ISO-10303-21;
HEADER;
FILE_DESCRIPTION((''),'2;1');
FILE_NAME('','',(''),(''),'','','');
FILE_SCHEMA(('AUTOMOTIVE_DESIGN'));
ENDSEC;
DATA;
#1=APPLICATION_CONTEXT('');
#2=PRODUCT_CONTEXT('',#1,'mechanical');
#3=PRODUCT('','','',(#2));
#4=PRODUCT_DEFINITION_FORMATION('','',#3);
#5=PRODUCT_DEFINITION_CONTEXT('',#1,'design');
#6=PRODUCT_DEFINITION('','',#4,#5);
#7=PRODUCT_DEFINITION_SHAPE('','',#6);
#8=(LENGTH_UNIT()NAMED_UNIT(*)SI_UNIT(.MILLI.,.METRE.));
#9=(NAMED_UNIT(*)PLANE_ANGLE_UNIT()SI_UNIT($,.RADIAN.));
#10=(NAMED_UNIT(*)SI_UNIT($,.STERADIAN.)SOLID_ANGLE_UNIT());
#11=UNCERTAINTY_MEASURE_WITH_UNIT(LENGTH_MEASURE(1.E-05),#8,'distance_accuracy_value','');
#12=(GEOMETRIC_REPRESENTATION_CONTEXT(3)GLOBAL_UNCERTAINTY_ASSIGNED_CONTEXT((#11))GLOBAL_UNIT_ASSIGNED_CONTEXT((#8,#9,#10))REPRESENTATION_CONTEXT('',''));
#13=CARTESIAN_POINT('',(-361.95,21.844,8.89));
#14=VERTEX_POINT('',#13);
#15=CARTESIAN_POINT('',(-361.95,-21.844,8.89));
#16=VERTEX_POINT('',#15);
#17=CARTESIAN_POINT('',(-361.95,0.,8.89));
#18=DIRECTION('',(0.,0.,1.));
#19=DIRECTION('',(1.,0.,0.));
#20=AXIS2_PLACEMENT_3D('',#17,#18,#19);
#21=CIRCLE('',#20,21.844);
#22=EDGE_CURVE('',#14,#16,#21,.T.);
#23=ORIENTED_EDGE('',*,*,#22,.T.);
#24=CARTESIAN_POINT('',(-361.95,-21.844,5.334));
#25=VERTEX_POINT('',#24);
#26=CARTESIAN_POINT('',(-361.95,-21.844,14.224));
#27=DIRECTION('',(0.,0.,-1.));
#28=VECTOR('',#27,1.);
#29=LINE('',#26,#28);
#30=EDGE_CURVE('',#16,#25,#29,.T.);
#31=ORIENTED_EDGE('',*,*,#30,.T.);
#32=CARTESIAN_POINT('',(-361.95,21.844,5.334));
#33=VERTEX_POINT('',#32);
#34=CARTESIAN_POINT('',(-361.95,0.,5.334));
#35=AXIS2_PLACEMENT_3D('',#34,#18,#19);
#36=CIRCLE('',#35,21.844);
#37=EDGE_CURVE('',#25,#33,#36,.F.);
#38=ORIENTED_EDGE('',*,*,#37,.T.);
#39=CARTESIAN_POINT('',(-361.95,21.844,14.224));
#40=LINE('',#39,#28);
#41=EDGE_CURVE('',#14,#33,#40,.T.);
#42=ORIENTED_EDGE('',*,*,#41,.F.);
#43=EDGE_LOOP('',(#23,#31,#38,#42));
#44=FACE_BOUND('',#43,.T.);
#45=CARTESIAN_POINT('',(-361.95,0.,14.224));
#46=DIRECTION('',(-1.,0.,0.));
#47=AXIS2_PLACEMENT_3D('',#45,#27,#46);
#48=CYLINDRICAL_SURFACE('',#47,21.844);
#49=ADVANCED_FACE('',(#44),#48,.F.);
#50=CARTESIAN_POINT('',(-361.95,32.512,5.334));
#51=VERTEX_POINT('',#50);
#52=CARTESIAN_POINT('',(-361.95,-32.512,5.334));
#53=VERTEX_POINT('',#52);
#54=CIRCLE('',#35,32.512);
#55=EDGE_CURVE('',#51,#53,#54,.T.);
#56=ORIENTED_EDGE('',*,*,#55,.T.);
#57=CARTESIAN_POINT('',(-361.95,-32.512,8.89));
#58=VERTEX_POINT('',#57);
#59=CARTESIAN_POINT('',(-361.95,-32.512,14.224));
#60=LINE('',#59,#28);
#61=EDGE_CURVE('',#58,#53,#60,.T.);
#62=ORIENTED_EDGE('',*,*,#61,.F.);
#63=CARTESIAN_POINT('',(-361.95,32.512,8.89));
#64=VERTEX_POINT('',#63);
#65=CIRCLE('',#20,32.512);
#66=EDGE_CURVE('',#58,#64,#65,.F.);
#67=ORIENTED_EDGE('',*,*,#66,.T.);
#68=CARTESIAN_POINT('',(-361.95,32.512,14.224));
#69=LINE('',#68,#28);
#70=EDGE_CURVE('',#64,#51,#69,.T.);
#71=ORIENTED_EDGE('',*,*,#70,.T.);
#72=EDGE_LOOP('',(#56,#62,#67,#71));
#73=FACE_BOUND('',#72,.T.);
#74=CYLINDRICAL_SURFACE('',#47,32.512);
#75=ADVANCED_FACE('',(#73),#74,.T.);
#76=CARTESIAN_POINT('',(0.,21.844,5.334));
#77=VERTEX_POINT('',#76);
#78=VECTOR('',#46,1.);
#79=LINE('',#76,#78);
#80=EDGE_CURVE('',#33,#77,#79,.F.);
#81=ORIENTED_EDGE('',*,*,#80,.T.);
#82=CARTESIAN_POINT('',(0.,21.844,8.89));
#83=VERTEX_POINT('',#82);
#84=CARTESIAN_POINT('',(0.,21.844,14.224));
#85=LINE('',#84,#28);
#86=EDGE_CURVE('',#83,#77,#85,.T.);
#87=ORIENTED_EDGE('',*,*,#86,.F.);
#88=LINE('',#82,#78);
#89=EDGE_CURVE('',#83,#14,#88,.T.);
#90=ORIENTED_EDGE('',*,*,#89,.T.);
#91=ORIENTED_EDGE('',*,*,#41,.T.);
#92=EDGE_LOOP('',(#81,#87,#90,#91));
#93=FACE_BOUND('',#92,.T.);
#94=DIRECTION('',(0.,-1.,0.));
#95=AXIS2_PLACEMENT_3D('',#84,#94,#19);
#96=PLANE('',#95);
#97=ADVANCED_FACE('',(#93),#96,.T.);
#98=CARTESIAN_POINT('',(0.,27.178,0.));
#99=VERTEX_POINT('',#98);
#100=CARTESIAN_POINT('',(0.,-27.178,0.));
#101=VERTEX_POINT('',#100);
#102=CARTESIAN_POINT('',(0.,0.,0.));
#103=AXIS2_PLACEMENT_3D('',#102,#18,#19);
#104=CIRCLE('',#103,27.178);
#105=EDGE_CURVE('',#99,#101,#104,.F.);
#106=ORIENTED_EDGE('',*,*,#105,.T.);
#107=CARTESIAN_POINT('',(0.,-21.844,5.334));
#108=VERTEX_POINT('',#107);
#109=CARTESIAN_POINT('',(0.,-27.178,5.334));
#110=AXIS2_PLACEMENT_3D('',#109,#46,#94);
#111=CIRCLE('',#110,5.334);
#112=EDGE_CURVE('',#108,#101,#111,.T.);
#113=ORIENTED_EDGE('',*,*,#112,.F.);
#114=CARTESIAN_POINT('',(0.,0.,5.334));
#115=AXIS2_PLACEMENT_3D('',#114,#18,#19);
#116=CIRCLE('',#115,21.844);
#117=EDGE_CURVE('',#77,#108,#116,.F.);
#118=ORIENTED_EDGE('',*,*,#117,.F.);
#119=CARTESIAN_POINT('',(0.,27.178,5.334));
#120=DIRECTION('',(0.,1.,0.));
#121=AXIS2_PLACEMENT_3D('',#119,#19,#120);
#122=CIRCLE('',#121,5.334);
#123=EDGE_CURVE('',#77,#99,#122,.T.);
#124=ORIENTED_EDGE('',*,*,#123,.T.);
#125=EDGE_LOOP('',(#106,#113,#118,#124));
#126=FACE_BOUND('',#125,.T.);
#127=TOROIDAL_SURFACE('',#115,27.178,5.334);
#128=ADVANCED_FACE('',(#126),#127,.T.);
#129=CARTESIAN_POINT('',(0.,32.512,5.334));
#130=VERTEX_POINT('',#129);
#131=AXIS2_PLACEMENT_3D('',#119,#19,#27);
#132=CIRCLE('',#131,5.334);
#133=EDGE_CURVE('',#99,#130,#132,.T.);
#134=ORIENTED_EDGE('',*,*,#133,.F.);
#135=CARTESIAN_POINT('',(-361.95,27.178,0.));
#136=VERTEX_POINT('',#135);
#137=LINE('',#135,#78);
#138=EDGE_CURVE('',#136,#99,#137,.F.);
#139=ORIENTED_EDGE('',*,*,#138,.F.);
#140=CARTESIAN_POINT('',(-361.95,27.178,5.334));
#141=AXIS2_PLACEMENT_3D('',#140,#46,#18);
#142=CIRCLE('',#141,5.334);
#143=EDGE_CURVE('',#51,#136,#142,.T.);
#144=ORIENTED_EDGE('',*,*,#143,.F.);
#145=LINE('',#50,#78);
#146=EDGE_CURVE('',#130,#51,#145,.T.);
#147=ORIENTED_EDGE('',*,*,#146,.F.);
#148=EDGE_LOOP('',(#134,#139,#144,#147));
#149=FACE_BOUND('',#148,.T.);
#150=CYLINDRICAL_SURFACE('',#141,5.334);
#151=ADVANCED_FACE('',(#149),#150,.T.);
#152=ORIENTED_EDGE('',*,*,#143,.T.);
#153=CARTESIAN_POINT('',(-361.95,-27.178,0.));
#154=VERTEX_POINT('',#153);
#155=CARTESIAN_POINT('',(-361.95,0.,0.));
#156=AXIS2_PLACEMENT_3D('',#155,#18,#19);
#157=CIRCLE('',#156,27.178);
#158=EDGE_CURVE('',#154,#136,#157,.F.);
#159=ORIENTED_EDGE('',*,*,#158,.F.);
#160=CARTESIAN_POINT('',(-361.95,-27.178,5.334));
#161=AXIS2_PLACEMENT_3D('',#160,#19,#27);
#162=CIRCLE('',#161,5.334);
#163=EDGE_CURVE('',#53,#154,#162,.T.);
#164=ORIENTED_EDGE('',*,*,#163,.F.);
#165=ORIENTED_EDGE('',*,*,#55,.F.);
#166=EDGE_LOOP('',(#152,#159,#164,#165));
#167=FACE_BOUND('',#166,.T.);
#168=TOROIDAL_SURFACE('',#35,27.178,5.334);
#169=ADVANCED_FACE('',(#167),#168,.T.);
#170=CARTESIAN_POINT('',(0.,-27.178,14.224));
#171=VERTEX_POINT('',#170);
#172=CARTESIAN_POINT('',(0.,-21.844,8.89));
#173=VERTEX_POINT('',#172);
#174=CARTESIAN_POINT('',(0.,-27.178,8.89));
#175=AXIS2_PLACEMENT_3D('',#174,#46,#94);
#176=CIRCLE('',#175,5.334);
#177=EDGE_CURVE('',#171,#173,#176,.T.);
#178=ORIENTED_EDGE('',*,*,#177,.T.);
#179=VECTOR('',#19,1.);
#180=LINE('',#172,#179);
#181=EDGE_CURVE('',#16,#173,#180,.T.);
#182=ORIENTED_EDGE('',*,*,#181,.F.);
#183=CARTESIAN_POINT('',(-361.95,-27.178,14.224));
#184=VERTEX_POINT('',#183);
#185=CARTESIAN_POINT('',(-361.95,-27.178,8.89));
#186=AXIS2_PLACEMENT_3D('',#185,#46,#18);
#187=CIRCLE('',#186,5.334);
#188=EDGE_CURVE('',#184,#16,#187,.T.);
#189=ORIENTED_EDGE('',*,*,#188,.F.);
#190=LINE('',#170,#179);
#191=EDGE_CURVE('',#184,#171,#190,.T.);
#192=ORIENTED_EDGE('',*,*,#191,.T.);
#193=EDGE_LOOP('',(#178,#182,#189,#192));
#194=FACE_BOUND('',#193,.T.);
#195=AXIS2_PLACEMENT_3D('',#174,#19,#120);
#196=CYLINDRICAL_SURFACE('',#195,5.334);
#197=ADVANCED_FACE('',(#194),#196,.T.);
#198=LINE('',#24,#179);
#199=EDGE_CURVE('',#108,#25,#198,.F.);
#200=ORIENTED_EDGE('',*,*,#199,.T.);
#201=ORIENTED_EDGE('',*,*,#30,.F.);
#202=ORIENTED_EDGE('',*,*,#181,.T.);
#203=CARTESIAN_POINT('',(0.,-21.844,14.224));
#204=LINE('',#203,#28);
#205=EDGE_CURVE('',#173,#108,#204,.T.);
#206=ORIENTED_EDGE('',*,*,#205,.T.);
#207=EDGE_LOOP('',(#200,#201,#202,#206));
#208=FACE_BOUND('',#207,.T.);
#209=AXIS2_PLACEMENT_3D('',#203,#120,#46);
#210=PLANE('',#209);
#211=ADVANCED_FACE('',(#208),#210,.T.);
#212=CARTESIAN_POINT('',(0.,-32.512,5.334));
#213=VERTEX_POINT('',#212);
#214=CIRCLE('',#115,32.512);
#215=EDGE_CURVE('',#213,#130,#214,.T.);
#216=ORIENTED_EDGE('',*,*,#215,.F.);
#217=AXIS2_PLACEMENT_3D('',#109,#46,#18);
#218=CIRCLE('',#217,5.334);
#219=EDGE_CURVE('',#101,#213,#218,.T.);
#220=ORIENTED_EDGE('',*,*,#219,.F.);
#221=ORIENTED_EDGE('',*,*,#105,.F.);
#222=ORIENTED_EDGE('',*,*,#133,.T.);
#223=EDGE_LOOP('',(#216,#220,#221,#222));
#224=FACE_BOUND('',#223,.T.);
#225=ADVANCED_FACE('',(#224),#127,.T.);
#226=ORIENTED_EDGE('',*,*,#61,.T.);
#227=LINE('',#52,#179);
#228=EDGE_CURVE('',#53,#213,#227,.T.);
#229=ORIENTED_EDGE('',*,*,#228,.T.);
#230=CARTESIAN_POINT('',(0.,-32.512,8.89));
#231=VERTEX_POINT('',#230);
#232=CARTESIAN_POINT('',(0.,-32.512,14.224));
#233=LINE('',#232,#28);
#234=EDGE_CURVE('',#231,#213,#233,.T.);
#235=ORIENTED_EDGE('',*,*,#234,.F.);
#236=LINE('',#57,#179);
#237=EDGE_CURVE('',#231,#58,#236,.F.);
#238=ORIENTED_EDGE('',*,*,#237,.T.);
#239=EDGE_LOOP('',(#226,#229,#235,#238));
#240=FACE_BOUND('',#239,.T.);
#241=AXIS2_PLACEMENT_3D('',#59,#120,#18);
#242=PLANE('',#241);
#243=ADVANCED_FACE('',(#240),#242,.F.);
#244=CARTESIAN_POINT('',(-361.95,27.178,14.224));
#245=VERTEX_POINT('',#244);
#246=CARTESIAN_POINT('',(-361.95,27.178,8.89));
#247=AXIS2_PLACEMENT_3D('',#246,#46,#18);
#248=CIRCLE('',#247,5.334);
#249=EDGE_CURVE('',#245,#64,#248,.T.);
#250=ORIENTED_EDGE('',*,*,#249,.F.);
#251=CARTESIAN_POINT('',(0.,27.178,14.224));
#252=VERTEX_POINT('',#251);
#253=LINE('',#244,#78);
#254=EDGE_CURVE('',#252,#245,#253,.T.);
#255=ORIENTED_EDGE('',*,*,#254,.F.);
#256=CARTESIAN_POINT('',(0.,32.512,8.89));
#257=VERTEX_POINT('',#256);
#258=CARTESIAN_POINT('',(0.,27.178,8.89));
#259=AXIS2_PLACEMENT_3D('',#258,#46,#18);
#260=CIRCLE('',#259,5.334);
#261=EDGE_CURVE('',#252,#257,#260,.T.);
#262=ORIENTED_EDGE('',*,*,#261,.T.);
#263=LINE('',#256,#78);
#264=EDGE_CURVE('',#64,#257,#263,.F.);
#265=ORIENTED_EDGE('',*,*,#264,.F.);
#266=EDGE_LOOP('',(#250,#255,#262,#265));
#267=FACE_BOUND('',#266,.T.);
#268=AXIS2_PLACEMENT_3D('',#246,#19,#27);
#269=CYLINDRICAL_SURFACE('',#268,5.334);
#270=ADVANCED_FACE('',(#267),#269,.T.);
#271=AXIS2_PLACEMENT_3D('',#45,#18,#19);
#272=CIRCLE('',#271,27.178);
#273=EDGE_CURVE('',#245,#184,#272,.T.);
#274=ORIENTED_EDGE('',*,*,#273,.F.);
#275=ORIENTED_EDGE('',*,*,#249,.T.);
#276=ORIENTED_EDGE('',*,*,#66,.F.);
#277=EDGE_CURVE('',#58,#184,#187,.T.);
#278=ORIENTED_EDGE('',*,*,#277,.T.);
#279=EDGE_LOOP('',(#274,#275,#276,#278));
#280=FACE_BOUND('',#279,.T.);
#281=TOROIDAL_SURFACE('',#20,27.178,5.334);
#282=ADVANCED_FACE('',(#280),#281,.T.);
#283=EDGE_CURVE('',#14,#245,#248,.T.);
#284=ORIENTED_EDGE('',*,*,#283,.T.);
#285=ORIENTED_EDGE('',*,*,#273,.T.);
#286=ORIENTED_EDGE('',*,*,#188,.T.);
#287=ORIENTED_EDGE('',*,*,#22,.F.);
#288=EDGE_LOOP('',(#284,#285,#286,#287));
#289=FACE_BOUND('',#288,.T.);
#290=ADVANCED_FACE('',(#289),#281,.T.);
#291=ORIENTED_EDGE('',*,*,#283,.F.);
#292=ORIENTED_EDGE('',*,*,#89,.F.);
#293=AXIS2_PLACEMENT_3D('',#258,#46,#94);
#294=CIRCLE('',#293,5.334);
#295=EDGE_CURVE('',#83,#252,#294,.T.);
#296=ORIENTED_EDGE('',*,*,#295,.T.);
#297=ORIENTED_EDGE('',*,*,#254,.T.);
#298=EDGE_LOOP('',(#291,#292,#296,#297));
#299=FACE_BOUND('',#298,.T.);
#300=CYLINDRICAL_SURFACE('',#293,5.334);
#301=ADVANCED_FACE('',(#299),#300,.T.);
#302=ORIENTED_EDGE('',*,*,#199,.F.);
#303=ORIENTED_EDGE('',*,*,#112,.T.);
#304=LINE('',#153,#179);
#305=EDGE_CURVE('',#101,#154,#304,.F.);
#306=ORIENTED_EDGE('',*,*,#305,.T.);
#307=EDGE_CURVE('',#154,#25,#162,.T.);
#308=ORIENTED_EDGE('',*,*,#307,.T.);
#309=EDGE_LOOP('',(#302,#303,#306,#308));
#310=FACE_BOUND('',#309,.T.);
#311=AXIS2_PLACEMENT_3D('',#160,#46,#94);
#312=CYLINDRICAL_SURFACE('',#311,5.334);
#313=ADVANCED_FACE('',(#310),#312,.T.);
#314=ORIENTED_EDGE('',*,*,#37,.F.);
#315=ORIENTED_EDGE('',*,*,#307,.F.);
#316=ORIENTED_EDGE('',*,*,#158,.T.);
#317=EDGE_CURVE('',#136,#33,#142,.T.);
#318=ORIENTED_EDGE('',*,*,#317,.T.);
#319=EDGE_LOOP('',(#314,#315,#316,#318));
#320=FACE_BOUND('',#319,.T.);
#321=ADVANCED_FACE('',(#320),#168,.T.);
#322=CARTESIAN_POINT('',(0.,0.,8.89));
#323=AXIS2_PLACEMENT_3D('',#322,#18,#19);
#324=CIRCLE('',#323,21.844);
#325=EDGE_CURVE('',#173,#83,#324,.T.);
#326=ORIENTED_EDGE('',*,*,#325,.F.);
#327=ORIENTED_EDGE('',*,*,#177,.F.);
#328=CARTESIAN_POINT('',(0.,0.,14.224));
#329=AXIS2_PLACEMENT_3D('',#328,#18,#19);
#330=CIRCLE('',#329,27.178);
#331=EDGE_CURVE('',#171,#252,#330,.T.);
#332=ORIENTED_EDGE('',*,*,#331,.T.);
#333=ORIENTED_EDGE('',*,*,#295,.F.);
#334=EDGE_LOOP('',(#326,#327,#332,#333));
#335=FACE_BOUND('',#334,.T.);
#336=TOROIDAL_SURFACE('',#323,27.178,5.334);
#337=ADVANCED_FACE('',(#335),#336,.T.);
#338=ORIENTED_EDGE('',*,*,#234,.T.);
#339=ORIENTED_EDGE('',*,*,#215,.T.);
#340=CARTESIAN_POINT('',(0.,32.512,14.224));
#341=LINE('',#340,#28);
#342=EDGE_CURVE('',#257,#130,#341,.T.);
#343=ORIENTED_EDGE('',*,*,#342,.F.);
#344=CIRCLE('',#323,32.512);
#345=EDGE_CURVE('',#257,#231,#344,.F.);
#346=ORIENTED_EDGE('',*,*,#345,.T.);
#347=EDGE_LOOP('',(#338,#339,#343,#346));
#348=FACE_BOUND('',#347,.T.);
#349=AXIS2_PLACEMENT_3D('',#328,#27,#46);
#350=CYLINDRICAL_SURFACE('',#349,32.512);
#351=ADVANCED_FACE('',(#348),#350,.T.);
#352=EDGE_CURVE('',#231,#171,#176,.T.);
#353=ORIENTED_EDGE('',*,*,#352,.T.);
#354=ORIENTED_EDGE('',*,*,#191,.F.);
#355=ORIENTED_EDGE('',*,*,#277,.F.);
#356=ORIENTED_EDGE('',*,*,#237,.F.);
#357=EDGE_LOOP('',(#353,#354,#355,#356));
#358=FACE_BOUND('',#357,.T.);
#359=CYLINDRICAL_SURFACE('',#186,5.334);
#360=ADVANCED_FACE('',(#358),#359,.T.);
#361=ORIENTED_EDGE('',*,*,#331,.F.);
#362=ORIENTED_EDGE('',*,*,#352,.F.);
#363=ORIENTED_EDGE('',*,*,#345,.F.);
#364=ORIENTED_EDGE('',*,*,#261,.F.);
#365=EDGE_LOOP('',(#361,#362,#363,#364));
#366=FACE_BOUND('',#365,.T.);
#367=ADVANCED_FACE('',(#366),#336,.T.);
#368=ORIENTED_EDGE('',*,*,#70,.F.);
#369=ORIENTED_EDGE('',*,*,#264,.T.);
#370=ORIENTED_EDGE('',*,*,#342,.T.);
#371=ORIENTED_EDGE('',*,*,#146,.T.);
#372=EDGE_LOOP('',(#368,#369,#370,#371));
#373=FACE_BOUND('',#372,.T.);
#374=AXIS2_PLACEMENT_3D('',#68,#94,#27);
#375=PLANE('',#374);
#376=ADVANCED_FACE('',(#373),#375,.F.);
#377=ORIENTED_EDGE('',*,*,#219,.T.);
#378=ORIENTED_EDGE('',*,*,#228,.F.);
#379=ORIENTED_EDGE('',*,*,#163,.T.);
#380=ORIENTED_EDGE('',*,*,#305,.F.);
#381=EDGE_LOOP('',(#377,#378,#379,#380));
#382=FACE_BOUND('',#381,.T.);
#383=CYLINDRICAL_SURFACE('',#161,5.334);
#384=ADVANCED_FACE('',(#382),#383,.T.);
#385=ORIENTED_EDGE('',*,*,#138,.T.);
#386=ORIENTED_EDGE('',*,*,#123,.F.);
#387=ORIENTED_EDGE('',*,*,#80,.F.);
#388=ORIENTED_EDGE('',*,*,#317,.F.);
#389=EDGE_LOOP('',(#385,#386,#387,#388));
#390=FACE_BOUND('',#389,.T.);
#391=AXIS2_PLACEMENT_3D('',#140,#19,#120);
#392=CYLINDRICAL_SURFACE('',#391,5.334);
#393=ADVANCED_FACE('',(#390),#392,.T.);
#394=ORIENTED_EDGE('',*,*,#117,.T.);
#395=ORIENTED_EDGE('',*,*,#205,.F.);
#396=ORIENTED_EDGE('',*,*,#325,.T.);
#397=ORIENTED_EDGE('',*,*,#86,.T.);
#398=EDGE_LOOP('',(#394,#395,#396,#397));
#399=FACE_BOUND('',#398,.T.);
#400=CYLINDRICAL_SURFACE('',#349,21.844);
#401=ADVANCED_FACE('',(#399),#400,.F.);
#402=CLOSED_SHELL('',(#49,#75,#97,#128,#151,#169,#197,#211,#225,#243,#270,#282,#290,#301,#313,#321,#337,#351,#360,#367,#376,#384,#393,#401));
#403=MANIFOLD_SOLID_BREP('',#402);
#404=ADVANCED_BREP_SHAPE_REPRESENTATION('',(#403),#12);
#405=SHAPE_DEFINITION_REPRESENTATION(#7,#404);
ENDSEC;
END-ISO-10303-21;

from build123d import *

# Parameters (mm, degrees)
BOSS_EXTRUDE1_DEPTH = 14.224
FILLET1_R           = 5.334


with BuildPart() as part:
    # Sketch1 → Boss-Extrude1 (new body)
    with BuildSketch(Plane.XY):
        with BuildLine():
            Line((-361.95, 32.512), (0, 32.512))
            ThreePointArc((0, 32.512), (32.512, 0), (0, -32.512))
            Line((0, -32.512), (-361.95, -32.512))
            ThreePointArc((-361.95, -32.512), (-394.462, 0), (-361.95, 32.512))
        make_face()
        with BuildLine():
            Line((0, -21.844), (-361.95, -21.844))
            ThreePointArc((-361.95, -21.844), (-383.794, 0), (-361.95, 21.844))
            Line((-361.95, 21.844), (0, 21.844))
            ThreePointArc((0, 21.844), (21.844, 0), (0, -21.844))
        make_face(mode=Mode.SUBTRACT)
    extrude(amount=BOSS_EXTRUDE1_DEPTH)

    # Fillet1
    fillet1_edges = [part.edges().sort_by_distance(p)[0] for p in [
        (32.512, 0, 14.224),
        (-180.975, 32.512, 14.224),
        (21.844, 0, 0),
        (-180.975, 21.844, 0),
        (-383.794, 0, 0),
        (-180.975, -21.844, 0),
        (21.844, 0, 14.224),
        (-180.975, 21.844, 14.224),
        (-383.794, 0, 14.224),
        (-180.975, -21.844, 14.224),
        (-394.462, 0, 14.224),
        (-180.975, 32.512, 0),
        (32.512, 0, 0),
        (-180.975, -32.512, 0),
        (-394.462, 0, 0),
        (-180.975, -32.512, 14.224),
    ]]
    fillet(fillet1_edges, radius=FILLET1_R - 0.0001)  # a hair under: the kernel refuses the full size


solid = part.part
